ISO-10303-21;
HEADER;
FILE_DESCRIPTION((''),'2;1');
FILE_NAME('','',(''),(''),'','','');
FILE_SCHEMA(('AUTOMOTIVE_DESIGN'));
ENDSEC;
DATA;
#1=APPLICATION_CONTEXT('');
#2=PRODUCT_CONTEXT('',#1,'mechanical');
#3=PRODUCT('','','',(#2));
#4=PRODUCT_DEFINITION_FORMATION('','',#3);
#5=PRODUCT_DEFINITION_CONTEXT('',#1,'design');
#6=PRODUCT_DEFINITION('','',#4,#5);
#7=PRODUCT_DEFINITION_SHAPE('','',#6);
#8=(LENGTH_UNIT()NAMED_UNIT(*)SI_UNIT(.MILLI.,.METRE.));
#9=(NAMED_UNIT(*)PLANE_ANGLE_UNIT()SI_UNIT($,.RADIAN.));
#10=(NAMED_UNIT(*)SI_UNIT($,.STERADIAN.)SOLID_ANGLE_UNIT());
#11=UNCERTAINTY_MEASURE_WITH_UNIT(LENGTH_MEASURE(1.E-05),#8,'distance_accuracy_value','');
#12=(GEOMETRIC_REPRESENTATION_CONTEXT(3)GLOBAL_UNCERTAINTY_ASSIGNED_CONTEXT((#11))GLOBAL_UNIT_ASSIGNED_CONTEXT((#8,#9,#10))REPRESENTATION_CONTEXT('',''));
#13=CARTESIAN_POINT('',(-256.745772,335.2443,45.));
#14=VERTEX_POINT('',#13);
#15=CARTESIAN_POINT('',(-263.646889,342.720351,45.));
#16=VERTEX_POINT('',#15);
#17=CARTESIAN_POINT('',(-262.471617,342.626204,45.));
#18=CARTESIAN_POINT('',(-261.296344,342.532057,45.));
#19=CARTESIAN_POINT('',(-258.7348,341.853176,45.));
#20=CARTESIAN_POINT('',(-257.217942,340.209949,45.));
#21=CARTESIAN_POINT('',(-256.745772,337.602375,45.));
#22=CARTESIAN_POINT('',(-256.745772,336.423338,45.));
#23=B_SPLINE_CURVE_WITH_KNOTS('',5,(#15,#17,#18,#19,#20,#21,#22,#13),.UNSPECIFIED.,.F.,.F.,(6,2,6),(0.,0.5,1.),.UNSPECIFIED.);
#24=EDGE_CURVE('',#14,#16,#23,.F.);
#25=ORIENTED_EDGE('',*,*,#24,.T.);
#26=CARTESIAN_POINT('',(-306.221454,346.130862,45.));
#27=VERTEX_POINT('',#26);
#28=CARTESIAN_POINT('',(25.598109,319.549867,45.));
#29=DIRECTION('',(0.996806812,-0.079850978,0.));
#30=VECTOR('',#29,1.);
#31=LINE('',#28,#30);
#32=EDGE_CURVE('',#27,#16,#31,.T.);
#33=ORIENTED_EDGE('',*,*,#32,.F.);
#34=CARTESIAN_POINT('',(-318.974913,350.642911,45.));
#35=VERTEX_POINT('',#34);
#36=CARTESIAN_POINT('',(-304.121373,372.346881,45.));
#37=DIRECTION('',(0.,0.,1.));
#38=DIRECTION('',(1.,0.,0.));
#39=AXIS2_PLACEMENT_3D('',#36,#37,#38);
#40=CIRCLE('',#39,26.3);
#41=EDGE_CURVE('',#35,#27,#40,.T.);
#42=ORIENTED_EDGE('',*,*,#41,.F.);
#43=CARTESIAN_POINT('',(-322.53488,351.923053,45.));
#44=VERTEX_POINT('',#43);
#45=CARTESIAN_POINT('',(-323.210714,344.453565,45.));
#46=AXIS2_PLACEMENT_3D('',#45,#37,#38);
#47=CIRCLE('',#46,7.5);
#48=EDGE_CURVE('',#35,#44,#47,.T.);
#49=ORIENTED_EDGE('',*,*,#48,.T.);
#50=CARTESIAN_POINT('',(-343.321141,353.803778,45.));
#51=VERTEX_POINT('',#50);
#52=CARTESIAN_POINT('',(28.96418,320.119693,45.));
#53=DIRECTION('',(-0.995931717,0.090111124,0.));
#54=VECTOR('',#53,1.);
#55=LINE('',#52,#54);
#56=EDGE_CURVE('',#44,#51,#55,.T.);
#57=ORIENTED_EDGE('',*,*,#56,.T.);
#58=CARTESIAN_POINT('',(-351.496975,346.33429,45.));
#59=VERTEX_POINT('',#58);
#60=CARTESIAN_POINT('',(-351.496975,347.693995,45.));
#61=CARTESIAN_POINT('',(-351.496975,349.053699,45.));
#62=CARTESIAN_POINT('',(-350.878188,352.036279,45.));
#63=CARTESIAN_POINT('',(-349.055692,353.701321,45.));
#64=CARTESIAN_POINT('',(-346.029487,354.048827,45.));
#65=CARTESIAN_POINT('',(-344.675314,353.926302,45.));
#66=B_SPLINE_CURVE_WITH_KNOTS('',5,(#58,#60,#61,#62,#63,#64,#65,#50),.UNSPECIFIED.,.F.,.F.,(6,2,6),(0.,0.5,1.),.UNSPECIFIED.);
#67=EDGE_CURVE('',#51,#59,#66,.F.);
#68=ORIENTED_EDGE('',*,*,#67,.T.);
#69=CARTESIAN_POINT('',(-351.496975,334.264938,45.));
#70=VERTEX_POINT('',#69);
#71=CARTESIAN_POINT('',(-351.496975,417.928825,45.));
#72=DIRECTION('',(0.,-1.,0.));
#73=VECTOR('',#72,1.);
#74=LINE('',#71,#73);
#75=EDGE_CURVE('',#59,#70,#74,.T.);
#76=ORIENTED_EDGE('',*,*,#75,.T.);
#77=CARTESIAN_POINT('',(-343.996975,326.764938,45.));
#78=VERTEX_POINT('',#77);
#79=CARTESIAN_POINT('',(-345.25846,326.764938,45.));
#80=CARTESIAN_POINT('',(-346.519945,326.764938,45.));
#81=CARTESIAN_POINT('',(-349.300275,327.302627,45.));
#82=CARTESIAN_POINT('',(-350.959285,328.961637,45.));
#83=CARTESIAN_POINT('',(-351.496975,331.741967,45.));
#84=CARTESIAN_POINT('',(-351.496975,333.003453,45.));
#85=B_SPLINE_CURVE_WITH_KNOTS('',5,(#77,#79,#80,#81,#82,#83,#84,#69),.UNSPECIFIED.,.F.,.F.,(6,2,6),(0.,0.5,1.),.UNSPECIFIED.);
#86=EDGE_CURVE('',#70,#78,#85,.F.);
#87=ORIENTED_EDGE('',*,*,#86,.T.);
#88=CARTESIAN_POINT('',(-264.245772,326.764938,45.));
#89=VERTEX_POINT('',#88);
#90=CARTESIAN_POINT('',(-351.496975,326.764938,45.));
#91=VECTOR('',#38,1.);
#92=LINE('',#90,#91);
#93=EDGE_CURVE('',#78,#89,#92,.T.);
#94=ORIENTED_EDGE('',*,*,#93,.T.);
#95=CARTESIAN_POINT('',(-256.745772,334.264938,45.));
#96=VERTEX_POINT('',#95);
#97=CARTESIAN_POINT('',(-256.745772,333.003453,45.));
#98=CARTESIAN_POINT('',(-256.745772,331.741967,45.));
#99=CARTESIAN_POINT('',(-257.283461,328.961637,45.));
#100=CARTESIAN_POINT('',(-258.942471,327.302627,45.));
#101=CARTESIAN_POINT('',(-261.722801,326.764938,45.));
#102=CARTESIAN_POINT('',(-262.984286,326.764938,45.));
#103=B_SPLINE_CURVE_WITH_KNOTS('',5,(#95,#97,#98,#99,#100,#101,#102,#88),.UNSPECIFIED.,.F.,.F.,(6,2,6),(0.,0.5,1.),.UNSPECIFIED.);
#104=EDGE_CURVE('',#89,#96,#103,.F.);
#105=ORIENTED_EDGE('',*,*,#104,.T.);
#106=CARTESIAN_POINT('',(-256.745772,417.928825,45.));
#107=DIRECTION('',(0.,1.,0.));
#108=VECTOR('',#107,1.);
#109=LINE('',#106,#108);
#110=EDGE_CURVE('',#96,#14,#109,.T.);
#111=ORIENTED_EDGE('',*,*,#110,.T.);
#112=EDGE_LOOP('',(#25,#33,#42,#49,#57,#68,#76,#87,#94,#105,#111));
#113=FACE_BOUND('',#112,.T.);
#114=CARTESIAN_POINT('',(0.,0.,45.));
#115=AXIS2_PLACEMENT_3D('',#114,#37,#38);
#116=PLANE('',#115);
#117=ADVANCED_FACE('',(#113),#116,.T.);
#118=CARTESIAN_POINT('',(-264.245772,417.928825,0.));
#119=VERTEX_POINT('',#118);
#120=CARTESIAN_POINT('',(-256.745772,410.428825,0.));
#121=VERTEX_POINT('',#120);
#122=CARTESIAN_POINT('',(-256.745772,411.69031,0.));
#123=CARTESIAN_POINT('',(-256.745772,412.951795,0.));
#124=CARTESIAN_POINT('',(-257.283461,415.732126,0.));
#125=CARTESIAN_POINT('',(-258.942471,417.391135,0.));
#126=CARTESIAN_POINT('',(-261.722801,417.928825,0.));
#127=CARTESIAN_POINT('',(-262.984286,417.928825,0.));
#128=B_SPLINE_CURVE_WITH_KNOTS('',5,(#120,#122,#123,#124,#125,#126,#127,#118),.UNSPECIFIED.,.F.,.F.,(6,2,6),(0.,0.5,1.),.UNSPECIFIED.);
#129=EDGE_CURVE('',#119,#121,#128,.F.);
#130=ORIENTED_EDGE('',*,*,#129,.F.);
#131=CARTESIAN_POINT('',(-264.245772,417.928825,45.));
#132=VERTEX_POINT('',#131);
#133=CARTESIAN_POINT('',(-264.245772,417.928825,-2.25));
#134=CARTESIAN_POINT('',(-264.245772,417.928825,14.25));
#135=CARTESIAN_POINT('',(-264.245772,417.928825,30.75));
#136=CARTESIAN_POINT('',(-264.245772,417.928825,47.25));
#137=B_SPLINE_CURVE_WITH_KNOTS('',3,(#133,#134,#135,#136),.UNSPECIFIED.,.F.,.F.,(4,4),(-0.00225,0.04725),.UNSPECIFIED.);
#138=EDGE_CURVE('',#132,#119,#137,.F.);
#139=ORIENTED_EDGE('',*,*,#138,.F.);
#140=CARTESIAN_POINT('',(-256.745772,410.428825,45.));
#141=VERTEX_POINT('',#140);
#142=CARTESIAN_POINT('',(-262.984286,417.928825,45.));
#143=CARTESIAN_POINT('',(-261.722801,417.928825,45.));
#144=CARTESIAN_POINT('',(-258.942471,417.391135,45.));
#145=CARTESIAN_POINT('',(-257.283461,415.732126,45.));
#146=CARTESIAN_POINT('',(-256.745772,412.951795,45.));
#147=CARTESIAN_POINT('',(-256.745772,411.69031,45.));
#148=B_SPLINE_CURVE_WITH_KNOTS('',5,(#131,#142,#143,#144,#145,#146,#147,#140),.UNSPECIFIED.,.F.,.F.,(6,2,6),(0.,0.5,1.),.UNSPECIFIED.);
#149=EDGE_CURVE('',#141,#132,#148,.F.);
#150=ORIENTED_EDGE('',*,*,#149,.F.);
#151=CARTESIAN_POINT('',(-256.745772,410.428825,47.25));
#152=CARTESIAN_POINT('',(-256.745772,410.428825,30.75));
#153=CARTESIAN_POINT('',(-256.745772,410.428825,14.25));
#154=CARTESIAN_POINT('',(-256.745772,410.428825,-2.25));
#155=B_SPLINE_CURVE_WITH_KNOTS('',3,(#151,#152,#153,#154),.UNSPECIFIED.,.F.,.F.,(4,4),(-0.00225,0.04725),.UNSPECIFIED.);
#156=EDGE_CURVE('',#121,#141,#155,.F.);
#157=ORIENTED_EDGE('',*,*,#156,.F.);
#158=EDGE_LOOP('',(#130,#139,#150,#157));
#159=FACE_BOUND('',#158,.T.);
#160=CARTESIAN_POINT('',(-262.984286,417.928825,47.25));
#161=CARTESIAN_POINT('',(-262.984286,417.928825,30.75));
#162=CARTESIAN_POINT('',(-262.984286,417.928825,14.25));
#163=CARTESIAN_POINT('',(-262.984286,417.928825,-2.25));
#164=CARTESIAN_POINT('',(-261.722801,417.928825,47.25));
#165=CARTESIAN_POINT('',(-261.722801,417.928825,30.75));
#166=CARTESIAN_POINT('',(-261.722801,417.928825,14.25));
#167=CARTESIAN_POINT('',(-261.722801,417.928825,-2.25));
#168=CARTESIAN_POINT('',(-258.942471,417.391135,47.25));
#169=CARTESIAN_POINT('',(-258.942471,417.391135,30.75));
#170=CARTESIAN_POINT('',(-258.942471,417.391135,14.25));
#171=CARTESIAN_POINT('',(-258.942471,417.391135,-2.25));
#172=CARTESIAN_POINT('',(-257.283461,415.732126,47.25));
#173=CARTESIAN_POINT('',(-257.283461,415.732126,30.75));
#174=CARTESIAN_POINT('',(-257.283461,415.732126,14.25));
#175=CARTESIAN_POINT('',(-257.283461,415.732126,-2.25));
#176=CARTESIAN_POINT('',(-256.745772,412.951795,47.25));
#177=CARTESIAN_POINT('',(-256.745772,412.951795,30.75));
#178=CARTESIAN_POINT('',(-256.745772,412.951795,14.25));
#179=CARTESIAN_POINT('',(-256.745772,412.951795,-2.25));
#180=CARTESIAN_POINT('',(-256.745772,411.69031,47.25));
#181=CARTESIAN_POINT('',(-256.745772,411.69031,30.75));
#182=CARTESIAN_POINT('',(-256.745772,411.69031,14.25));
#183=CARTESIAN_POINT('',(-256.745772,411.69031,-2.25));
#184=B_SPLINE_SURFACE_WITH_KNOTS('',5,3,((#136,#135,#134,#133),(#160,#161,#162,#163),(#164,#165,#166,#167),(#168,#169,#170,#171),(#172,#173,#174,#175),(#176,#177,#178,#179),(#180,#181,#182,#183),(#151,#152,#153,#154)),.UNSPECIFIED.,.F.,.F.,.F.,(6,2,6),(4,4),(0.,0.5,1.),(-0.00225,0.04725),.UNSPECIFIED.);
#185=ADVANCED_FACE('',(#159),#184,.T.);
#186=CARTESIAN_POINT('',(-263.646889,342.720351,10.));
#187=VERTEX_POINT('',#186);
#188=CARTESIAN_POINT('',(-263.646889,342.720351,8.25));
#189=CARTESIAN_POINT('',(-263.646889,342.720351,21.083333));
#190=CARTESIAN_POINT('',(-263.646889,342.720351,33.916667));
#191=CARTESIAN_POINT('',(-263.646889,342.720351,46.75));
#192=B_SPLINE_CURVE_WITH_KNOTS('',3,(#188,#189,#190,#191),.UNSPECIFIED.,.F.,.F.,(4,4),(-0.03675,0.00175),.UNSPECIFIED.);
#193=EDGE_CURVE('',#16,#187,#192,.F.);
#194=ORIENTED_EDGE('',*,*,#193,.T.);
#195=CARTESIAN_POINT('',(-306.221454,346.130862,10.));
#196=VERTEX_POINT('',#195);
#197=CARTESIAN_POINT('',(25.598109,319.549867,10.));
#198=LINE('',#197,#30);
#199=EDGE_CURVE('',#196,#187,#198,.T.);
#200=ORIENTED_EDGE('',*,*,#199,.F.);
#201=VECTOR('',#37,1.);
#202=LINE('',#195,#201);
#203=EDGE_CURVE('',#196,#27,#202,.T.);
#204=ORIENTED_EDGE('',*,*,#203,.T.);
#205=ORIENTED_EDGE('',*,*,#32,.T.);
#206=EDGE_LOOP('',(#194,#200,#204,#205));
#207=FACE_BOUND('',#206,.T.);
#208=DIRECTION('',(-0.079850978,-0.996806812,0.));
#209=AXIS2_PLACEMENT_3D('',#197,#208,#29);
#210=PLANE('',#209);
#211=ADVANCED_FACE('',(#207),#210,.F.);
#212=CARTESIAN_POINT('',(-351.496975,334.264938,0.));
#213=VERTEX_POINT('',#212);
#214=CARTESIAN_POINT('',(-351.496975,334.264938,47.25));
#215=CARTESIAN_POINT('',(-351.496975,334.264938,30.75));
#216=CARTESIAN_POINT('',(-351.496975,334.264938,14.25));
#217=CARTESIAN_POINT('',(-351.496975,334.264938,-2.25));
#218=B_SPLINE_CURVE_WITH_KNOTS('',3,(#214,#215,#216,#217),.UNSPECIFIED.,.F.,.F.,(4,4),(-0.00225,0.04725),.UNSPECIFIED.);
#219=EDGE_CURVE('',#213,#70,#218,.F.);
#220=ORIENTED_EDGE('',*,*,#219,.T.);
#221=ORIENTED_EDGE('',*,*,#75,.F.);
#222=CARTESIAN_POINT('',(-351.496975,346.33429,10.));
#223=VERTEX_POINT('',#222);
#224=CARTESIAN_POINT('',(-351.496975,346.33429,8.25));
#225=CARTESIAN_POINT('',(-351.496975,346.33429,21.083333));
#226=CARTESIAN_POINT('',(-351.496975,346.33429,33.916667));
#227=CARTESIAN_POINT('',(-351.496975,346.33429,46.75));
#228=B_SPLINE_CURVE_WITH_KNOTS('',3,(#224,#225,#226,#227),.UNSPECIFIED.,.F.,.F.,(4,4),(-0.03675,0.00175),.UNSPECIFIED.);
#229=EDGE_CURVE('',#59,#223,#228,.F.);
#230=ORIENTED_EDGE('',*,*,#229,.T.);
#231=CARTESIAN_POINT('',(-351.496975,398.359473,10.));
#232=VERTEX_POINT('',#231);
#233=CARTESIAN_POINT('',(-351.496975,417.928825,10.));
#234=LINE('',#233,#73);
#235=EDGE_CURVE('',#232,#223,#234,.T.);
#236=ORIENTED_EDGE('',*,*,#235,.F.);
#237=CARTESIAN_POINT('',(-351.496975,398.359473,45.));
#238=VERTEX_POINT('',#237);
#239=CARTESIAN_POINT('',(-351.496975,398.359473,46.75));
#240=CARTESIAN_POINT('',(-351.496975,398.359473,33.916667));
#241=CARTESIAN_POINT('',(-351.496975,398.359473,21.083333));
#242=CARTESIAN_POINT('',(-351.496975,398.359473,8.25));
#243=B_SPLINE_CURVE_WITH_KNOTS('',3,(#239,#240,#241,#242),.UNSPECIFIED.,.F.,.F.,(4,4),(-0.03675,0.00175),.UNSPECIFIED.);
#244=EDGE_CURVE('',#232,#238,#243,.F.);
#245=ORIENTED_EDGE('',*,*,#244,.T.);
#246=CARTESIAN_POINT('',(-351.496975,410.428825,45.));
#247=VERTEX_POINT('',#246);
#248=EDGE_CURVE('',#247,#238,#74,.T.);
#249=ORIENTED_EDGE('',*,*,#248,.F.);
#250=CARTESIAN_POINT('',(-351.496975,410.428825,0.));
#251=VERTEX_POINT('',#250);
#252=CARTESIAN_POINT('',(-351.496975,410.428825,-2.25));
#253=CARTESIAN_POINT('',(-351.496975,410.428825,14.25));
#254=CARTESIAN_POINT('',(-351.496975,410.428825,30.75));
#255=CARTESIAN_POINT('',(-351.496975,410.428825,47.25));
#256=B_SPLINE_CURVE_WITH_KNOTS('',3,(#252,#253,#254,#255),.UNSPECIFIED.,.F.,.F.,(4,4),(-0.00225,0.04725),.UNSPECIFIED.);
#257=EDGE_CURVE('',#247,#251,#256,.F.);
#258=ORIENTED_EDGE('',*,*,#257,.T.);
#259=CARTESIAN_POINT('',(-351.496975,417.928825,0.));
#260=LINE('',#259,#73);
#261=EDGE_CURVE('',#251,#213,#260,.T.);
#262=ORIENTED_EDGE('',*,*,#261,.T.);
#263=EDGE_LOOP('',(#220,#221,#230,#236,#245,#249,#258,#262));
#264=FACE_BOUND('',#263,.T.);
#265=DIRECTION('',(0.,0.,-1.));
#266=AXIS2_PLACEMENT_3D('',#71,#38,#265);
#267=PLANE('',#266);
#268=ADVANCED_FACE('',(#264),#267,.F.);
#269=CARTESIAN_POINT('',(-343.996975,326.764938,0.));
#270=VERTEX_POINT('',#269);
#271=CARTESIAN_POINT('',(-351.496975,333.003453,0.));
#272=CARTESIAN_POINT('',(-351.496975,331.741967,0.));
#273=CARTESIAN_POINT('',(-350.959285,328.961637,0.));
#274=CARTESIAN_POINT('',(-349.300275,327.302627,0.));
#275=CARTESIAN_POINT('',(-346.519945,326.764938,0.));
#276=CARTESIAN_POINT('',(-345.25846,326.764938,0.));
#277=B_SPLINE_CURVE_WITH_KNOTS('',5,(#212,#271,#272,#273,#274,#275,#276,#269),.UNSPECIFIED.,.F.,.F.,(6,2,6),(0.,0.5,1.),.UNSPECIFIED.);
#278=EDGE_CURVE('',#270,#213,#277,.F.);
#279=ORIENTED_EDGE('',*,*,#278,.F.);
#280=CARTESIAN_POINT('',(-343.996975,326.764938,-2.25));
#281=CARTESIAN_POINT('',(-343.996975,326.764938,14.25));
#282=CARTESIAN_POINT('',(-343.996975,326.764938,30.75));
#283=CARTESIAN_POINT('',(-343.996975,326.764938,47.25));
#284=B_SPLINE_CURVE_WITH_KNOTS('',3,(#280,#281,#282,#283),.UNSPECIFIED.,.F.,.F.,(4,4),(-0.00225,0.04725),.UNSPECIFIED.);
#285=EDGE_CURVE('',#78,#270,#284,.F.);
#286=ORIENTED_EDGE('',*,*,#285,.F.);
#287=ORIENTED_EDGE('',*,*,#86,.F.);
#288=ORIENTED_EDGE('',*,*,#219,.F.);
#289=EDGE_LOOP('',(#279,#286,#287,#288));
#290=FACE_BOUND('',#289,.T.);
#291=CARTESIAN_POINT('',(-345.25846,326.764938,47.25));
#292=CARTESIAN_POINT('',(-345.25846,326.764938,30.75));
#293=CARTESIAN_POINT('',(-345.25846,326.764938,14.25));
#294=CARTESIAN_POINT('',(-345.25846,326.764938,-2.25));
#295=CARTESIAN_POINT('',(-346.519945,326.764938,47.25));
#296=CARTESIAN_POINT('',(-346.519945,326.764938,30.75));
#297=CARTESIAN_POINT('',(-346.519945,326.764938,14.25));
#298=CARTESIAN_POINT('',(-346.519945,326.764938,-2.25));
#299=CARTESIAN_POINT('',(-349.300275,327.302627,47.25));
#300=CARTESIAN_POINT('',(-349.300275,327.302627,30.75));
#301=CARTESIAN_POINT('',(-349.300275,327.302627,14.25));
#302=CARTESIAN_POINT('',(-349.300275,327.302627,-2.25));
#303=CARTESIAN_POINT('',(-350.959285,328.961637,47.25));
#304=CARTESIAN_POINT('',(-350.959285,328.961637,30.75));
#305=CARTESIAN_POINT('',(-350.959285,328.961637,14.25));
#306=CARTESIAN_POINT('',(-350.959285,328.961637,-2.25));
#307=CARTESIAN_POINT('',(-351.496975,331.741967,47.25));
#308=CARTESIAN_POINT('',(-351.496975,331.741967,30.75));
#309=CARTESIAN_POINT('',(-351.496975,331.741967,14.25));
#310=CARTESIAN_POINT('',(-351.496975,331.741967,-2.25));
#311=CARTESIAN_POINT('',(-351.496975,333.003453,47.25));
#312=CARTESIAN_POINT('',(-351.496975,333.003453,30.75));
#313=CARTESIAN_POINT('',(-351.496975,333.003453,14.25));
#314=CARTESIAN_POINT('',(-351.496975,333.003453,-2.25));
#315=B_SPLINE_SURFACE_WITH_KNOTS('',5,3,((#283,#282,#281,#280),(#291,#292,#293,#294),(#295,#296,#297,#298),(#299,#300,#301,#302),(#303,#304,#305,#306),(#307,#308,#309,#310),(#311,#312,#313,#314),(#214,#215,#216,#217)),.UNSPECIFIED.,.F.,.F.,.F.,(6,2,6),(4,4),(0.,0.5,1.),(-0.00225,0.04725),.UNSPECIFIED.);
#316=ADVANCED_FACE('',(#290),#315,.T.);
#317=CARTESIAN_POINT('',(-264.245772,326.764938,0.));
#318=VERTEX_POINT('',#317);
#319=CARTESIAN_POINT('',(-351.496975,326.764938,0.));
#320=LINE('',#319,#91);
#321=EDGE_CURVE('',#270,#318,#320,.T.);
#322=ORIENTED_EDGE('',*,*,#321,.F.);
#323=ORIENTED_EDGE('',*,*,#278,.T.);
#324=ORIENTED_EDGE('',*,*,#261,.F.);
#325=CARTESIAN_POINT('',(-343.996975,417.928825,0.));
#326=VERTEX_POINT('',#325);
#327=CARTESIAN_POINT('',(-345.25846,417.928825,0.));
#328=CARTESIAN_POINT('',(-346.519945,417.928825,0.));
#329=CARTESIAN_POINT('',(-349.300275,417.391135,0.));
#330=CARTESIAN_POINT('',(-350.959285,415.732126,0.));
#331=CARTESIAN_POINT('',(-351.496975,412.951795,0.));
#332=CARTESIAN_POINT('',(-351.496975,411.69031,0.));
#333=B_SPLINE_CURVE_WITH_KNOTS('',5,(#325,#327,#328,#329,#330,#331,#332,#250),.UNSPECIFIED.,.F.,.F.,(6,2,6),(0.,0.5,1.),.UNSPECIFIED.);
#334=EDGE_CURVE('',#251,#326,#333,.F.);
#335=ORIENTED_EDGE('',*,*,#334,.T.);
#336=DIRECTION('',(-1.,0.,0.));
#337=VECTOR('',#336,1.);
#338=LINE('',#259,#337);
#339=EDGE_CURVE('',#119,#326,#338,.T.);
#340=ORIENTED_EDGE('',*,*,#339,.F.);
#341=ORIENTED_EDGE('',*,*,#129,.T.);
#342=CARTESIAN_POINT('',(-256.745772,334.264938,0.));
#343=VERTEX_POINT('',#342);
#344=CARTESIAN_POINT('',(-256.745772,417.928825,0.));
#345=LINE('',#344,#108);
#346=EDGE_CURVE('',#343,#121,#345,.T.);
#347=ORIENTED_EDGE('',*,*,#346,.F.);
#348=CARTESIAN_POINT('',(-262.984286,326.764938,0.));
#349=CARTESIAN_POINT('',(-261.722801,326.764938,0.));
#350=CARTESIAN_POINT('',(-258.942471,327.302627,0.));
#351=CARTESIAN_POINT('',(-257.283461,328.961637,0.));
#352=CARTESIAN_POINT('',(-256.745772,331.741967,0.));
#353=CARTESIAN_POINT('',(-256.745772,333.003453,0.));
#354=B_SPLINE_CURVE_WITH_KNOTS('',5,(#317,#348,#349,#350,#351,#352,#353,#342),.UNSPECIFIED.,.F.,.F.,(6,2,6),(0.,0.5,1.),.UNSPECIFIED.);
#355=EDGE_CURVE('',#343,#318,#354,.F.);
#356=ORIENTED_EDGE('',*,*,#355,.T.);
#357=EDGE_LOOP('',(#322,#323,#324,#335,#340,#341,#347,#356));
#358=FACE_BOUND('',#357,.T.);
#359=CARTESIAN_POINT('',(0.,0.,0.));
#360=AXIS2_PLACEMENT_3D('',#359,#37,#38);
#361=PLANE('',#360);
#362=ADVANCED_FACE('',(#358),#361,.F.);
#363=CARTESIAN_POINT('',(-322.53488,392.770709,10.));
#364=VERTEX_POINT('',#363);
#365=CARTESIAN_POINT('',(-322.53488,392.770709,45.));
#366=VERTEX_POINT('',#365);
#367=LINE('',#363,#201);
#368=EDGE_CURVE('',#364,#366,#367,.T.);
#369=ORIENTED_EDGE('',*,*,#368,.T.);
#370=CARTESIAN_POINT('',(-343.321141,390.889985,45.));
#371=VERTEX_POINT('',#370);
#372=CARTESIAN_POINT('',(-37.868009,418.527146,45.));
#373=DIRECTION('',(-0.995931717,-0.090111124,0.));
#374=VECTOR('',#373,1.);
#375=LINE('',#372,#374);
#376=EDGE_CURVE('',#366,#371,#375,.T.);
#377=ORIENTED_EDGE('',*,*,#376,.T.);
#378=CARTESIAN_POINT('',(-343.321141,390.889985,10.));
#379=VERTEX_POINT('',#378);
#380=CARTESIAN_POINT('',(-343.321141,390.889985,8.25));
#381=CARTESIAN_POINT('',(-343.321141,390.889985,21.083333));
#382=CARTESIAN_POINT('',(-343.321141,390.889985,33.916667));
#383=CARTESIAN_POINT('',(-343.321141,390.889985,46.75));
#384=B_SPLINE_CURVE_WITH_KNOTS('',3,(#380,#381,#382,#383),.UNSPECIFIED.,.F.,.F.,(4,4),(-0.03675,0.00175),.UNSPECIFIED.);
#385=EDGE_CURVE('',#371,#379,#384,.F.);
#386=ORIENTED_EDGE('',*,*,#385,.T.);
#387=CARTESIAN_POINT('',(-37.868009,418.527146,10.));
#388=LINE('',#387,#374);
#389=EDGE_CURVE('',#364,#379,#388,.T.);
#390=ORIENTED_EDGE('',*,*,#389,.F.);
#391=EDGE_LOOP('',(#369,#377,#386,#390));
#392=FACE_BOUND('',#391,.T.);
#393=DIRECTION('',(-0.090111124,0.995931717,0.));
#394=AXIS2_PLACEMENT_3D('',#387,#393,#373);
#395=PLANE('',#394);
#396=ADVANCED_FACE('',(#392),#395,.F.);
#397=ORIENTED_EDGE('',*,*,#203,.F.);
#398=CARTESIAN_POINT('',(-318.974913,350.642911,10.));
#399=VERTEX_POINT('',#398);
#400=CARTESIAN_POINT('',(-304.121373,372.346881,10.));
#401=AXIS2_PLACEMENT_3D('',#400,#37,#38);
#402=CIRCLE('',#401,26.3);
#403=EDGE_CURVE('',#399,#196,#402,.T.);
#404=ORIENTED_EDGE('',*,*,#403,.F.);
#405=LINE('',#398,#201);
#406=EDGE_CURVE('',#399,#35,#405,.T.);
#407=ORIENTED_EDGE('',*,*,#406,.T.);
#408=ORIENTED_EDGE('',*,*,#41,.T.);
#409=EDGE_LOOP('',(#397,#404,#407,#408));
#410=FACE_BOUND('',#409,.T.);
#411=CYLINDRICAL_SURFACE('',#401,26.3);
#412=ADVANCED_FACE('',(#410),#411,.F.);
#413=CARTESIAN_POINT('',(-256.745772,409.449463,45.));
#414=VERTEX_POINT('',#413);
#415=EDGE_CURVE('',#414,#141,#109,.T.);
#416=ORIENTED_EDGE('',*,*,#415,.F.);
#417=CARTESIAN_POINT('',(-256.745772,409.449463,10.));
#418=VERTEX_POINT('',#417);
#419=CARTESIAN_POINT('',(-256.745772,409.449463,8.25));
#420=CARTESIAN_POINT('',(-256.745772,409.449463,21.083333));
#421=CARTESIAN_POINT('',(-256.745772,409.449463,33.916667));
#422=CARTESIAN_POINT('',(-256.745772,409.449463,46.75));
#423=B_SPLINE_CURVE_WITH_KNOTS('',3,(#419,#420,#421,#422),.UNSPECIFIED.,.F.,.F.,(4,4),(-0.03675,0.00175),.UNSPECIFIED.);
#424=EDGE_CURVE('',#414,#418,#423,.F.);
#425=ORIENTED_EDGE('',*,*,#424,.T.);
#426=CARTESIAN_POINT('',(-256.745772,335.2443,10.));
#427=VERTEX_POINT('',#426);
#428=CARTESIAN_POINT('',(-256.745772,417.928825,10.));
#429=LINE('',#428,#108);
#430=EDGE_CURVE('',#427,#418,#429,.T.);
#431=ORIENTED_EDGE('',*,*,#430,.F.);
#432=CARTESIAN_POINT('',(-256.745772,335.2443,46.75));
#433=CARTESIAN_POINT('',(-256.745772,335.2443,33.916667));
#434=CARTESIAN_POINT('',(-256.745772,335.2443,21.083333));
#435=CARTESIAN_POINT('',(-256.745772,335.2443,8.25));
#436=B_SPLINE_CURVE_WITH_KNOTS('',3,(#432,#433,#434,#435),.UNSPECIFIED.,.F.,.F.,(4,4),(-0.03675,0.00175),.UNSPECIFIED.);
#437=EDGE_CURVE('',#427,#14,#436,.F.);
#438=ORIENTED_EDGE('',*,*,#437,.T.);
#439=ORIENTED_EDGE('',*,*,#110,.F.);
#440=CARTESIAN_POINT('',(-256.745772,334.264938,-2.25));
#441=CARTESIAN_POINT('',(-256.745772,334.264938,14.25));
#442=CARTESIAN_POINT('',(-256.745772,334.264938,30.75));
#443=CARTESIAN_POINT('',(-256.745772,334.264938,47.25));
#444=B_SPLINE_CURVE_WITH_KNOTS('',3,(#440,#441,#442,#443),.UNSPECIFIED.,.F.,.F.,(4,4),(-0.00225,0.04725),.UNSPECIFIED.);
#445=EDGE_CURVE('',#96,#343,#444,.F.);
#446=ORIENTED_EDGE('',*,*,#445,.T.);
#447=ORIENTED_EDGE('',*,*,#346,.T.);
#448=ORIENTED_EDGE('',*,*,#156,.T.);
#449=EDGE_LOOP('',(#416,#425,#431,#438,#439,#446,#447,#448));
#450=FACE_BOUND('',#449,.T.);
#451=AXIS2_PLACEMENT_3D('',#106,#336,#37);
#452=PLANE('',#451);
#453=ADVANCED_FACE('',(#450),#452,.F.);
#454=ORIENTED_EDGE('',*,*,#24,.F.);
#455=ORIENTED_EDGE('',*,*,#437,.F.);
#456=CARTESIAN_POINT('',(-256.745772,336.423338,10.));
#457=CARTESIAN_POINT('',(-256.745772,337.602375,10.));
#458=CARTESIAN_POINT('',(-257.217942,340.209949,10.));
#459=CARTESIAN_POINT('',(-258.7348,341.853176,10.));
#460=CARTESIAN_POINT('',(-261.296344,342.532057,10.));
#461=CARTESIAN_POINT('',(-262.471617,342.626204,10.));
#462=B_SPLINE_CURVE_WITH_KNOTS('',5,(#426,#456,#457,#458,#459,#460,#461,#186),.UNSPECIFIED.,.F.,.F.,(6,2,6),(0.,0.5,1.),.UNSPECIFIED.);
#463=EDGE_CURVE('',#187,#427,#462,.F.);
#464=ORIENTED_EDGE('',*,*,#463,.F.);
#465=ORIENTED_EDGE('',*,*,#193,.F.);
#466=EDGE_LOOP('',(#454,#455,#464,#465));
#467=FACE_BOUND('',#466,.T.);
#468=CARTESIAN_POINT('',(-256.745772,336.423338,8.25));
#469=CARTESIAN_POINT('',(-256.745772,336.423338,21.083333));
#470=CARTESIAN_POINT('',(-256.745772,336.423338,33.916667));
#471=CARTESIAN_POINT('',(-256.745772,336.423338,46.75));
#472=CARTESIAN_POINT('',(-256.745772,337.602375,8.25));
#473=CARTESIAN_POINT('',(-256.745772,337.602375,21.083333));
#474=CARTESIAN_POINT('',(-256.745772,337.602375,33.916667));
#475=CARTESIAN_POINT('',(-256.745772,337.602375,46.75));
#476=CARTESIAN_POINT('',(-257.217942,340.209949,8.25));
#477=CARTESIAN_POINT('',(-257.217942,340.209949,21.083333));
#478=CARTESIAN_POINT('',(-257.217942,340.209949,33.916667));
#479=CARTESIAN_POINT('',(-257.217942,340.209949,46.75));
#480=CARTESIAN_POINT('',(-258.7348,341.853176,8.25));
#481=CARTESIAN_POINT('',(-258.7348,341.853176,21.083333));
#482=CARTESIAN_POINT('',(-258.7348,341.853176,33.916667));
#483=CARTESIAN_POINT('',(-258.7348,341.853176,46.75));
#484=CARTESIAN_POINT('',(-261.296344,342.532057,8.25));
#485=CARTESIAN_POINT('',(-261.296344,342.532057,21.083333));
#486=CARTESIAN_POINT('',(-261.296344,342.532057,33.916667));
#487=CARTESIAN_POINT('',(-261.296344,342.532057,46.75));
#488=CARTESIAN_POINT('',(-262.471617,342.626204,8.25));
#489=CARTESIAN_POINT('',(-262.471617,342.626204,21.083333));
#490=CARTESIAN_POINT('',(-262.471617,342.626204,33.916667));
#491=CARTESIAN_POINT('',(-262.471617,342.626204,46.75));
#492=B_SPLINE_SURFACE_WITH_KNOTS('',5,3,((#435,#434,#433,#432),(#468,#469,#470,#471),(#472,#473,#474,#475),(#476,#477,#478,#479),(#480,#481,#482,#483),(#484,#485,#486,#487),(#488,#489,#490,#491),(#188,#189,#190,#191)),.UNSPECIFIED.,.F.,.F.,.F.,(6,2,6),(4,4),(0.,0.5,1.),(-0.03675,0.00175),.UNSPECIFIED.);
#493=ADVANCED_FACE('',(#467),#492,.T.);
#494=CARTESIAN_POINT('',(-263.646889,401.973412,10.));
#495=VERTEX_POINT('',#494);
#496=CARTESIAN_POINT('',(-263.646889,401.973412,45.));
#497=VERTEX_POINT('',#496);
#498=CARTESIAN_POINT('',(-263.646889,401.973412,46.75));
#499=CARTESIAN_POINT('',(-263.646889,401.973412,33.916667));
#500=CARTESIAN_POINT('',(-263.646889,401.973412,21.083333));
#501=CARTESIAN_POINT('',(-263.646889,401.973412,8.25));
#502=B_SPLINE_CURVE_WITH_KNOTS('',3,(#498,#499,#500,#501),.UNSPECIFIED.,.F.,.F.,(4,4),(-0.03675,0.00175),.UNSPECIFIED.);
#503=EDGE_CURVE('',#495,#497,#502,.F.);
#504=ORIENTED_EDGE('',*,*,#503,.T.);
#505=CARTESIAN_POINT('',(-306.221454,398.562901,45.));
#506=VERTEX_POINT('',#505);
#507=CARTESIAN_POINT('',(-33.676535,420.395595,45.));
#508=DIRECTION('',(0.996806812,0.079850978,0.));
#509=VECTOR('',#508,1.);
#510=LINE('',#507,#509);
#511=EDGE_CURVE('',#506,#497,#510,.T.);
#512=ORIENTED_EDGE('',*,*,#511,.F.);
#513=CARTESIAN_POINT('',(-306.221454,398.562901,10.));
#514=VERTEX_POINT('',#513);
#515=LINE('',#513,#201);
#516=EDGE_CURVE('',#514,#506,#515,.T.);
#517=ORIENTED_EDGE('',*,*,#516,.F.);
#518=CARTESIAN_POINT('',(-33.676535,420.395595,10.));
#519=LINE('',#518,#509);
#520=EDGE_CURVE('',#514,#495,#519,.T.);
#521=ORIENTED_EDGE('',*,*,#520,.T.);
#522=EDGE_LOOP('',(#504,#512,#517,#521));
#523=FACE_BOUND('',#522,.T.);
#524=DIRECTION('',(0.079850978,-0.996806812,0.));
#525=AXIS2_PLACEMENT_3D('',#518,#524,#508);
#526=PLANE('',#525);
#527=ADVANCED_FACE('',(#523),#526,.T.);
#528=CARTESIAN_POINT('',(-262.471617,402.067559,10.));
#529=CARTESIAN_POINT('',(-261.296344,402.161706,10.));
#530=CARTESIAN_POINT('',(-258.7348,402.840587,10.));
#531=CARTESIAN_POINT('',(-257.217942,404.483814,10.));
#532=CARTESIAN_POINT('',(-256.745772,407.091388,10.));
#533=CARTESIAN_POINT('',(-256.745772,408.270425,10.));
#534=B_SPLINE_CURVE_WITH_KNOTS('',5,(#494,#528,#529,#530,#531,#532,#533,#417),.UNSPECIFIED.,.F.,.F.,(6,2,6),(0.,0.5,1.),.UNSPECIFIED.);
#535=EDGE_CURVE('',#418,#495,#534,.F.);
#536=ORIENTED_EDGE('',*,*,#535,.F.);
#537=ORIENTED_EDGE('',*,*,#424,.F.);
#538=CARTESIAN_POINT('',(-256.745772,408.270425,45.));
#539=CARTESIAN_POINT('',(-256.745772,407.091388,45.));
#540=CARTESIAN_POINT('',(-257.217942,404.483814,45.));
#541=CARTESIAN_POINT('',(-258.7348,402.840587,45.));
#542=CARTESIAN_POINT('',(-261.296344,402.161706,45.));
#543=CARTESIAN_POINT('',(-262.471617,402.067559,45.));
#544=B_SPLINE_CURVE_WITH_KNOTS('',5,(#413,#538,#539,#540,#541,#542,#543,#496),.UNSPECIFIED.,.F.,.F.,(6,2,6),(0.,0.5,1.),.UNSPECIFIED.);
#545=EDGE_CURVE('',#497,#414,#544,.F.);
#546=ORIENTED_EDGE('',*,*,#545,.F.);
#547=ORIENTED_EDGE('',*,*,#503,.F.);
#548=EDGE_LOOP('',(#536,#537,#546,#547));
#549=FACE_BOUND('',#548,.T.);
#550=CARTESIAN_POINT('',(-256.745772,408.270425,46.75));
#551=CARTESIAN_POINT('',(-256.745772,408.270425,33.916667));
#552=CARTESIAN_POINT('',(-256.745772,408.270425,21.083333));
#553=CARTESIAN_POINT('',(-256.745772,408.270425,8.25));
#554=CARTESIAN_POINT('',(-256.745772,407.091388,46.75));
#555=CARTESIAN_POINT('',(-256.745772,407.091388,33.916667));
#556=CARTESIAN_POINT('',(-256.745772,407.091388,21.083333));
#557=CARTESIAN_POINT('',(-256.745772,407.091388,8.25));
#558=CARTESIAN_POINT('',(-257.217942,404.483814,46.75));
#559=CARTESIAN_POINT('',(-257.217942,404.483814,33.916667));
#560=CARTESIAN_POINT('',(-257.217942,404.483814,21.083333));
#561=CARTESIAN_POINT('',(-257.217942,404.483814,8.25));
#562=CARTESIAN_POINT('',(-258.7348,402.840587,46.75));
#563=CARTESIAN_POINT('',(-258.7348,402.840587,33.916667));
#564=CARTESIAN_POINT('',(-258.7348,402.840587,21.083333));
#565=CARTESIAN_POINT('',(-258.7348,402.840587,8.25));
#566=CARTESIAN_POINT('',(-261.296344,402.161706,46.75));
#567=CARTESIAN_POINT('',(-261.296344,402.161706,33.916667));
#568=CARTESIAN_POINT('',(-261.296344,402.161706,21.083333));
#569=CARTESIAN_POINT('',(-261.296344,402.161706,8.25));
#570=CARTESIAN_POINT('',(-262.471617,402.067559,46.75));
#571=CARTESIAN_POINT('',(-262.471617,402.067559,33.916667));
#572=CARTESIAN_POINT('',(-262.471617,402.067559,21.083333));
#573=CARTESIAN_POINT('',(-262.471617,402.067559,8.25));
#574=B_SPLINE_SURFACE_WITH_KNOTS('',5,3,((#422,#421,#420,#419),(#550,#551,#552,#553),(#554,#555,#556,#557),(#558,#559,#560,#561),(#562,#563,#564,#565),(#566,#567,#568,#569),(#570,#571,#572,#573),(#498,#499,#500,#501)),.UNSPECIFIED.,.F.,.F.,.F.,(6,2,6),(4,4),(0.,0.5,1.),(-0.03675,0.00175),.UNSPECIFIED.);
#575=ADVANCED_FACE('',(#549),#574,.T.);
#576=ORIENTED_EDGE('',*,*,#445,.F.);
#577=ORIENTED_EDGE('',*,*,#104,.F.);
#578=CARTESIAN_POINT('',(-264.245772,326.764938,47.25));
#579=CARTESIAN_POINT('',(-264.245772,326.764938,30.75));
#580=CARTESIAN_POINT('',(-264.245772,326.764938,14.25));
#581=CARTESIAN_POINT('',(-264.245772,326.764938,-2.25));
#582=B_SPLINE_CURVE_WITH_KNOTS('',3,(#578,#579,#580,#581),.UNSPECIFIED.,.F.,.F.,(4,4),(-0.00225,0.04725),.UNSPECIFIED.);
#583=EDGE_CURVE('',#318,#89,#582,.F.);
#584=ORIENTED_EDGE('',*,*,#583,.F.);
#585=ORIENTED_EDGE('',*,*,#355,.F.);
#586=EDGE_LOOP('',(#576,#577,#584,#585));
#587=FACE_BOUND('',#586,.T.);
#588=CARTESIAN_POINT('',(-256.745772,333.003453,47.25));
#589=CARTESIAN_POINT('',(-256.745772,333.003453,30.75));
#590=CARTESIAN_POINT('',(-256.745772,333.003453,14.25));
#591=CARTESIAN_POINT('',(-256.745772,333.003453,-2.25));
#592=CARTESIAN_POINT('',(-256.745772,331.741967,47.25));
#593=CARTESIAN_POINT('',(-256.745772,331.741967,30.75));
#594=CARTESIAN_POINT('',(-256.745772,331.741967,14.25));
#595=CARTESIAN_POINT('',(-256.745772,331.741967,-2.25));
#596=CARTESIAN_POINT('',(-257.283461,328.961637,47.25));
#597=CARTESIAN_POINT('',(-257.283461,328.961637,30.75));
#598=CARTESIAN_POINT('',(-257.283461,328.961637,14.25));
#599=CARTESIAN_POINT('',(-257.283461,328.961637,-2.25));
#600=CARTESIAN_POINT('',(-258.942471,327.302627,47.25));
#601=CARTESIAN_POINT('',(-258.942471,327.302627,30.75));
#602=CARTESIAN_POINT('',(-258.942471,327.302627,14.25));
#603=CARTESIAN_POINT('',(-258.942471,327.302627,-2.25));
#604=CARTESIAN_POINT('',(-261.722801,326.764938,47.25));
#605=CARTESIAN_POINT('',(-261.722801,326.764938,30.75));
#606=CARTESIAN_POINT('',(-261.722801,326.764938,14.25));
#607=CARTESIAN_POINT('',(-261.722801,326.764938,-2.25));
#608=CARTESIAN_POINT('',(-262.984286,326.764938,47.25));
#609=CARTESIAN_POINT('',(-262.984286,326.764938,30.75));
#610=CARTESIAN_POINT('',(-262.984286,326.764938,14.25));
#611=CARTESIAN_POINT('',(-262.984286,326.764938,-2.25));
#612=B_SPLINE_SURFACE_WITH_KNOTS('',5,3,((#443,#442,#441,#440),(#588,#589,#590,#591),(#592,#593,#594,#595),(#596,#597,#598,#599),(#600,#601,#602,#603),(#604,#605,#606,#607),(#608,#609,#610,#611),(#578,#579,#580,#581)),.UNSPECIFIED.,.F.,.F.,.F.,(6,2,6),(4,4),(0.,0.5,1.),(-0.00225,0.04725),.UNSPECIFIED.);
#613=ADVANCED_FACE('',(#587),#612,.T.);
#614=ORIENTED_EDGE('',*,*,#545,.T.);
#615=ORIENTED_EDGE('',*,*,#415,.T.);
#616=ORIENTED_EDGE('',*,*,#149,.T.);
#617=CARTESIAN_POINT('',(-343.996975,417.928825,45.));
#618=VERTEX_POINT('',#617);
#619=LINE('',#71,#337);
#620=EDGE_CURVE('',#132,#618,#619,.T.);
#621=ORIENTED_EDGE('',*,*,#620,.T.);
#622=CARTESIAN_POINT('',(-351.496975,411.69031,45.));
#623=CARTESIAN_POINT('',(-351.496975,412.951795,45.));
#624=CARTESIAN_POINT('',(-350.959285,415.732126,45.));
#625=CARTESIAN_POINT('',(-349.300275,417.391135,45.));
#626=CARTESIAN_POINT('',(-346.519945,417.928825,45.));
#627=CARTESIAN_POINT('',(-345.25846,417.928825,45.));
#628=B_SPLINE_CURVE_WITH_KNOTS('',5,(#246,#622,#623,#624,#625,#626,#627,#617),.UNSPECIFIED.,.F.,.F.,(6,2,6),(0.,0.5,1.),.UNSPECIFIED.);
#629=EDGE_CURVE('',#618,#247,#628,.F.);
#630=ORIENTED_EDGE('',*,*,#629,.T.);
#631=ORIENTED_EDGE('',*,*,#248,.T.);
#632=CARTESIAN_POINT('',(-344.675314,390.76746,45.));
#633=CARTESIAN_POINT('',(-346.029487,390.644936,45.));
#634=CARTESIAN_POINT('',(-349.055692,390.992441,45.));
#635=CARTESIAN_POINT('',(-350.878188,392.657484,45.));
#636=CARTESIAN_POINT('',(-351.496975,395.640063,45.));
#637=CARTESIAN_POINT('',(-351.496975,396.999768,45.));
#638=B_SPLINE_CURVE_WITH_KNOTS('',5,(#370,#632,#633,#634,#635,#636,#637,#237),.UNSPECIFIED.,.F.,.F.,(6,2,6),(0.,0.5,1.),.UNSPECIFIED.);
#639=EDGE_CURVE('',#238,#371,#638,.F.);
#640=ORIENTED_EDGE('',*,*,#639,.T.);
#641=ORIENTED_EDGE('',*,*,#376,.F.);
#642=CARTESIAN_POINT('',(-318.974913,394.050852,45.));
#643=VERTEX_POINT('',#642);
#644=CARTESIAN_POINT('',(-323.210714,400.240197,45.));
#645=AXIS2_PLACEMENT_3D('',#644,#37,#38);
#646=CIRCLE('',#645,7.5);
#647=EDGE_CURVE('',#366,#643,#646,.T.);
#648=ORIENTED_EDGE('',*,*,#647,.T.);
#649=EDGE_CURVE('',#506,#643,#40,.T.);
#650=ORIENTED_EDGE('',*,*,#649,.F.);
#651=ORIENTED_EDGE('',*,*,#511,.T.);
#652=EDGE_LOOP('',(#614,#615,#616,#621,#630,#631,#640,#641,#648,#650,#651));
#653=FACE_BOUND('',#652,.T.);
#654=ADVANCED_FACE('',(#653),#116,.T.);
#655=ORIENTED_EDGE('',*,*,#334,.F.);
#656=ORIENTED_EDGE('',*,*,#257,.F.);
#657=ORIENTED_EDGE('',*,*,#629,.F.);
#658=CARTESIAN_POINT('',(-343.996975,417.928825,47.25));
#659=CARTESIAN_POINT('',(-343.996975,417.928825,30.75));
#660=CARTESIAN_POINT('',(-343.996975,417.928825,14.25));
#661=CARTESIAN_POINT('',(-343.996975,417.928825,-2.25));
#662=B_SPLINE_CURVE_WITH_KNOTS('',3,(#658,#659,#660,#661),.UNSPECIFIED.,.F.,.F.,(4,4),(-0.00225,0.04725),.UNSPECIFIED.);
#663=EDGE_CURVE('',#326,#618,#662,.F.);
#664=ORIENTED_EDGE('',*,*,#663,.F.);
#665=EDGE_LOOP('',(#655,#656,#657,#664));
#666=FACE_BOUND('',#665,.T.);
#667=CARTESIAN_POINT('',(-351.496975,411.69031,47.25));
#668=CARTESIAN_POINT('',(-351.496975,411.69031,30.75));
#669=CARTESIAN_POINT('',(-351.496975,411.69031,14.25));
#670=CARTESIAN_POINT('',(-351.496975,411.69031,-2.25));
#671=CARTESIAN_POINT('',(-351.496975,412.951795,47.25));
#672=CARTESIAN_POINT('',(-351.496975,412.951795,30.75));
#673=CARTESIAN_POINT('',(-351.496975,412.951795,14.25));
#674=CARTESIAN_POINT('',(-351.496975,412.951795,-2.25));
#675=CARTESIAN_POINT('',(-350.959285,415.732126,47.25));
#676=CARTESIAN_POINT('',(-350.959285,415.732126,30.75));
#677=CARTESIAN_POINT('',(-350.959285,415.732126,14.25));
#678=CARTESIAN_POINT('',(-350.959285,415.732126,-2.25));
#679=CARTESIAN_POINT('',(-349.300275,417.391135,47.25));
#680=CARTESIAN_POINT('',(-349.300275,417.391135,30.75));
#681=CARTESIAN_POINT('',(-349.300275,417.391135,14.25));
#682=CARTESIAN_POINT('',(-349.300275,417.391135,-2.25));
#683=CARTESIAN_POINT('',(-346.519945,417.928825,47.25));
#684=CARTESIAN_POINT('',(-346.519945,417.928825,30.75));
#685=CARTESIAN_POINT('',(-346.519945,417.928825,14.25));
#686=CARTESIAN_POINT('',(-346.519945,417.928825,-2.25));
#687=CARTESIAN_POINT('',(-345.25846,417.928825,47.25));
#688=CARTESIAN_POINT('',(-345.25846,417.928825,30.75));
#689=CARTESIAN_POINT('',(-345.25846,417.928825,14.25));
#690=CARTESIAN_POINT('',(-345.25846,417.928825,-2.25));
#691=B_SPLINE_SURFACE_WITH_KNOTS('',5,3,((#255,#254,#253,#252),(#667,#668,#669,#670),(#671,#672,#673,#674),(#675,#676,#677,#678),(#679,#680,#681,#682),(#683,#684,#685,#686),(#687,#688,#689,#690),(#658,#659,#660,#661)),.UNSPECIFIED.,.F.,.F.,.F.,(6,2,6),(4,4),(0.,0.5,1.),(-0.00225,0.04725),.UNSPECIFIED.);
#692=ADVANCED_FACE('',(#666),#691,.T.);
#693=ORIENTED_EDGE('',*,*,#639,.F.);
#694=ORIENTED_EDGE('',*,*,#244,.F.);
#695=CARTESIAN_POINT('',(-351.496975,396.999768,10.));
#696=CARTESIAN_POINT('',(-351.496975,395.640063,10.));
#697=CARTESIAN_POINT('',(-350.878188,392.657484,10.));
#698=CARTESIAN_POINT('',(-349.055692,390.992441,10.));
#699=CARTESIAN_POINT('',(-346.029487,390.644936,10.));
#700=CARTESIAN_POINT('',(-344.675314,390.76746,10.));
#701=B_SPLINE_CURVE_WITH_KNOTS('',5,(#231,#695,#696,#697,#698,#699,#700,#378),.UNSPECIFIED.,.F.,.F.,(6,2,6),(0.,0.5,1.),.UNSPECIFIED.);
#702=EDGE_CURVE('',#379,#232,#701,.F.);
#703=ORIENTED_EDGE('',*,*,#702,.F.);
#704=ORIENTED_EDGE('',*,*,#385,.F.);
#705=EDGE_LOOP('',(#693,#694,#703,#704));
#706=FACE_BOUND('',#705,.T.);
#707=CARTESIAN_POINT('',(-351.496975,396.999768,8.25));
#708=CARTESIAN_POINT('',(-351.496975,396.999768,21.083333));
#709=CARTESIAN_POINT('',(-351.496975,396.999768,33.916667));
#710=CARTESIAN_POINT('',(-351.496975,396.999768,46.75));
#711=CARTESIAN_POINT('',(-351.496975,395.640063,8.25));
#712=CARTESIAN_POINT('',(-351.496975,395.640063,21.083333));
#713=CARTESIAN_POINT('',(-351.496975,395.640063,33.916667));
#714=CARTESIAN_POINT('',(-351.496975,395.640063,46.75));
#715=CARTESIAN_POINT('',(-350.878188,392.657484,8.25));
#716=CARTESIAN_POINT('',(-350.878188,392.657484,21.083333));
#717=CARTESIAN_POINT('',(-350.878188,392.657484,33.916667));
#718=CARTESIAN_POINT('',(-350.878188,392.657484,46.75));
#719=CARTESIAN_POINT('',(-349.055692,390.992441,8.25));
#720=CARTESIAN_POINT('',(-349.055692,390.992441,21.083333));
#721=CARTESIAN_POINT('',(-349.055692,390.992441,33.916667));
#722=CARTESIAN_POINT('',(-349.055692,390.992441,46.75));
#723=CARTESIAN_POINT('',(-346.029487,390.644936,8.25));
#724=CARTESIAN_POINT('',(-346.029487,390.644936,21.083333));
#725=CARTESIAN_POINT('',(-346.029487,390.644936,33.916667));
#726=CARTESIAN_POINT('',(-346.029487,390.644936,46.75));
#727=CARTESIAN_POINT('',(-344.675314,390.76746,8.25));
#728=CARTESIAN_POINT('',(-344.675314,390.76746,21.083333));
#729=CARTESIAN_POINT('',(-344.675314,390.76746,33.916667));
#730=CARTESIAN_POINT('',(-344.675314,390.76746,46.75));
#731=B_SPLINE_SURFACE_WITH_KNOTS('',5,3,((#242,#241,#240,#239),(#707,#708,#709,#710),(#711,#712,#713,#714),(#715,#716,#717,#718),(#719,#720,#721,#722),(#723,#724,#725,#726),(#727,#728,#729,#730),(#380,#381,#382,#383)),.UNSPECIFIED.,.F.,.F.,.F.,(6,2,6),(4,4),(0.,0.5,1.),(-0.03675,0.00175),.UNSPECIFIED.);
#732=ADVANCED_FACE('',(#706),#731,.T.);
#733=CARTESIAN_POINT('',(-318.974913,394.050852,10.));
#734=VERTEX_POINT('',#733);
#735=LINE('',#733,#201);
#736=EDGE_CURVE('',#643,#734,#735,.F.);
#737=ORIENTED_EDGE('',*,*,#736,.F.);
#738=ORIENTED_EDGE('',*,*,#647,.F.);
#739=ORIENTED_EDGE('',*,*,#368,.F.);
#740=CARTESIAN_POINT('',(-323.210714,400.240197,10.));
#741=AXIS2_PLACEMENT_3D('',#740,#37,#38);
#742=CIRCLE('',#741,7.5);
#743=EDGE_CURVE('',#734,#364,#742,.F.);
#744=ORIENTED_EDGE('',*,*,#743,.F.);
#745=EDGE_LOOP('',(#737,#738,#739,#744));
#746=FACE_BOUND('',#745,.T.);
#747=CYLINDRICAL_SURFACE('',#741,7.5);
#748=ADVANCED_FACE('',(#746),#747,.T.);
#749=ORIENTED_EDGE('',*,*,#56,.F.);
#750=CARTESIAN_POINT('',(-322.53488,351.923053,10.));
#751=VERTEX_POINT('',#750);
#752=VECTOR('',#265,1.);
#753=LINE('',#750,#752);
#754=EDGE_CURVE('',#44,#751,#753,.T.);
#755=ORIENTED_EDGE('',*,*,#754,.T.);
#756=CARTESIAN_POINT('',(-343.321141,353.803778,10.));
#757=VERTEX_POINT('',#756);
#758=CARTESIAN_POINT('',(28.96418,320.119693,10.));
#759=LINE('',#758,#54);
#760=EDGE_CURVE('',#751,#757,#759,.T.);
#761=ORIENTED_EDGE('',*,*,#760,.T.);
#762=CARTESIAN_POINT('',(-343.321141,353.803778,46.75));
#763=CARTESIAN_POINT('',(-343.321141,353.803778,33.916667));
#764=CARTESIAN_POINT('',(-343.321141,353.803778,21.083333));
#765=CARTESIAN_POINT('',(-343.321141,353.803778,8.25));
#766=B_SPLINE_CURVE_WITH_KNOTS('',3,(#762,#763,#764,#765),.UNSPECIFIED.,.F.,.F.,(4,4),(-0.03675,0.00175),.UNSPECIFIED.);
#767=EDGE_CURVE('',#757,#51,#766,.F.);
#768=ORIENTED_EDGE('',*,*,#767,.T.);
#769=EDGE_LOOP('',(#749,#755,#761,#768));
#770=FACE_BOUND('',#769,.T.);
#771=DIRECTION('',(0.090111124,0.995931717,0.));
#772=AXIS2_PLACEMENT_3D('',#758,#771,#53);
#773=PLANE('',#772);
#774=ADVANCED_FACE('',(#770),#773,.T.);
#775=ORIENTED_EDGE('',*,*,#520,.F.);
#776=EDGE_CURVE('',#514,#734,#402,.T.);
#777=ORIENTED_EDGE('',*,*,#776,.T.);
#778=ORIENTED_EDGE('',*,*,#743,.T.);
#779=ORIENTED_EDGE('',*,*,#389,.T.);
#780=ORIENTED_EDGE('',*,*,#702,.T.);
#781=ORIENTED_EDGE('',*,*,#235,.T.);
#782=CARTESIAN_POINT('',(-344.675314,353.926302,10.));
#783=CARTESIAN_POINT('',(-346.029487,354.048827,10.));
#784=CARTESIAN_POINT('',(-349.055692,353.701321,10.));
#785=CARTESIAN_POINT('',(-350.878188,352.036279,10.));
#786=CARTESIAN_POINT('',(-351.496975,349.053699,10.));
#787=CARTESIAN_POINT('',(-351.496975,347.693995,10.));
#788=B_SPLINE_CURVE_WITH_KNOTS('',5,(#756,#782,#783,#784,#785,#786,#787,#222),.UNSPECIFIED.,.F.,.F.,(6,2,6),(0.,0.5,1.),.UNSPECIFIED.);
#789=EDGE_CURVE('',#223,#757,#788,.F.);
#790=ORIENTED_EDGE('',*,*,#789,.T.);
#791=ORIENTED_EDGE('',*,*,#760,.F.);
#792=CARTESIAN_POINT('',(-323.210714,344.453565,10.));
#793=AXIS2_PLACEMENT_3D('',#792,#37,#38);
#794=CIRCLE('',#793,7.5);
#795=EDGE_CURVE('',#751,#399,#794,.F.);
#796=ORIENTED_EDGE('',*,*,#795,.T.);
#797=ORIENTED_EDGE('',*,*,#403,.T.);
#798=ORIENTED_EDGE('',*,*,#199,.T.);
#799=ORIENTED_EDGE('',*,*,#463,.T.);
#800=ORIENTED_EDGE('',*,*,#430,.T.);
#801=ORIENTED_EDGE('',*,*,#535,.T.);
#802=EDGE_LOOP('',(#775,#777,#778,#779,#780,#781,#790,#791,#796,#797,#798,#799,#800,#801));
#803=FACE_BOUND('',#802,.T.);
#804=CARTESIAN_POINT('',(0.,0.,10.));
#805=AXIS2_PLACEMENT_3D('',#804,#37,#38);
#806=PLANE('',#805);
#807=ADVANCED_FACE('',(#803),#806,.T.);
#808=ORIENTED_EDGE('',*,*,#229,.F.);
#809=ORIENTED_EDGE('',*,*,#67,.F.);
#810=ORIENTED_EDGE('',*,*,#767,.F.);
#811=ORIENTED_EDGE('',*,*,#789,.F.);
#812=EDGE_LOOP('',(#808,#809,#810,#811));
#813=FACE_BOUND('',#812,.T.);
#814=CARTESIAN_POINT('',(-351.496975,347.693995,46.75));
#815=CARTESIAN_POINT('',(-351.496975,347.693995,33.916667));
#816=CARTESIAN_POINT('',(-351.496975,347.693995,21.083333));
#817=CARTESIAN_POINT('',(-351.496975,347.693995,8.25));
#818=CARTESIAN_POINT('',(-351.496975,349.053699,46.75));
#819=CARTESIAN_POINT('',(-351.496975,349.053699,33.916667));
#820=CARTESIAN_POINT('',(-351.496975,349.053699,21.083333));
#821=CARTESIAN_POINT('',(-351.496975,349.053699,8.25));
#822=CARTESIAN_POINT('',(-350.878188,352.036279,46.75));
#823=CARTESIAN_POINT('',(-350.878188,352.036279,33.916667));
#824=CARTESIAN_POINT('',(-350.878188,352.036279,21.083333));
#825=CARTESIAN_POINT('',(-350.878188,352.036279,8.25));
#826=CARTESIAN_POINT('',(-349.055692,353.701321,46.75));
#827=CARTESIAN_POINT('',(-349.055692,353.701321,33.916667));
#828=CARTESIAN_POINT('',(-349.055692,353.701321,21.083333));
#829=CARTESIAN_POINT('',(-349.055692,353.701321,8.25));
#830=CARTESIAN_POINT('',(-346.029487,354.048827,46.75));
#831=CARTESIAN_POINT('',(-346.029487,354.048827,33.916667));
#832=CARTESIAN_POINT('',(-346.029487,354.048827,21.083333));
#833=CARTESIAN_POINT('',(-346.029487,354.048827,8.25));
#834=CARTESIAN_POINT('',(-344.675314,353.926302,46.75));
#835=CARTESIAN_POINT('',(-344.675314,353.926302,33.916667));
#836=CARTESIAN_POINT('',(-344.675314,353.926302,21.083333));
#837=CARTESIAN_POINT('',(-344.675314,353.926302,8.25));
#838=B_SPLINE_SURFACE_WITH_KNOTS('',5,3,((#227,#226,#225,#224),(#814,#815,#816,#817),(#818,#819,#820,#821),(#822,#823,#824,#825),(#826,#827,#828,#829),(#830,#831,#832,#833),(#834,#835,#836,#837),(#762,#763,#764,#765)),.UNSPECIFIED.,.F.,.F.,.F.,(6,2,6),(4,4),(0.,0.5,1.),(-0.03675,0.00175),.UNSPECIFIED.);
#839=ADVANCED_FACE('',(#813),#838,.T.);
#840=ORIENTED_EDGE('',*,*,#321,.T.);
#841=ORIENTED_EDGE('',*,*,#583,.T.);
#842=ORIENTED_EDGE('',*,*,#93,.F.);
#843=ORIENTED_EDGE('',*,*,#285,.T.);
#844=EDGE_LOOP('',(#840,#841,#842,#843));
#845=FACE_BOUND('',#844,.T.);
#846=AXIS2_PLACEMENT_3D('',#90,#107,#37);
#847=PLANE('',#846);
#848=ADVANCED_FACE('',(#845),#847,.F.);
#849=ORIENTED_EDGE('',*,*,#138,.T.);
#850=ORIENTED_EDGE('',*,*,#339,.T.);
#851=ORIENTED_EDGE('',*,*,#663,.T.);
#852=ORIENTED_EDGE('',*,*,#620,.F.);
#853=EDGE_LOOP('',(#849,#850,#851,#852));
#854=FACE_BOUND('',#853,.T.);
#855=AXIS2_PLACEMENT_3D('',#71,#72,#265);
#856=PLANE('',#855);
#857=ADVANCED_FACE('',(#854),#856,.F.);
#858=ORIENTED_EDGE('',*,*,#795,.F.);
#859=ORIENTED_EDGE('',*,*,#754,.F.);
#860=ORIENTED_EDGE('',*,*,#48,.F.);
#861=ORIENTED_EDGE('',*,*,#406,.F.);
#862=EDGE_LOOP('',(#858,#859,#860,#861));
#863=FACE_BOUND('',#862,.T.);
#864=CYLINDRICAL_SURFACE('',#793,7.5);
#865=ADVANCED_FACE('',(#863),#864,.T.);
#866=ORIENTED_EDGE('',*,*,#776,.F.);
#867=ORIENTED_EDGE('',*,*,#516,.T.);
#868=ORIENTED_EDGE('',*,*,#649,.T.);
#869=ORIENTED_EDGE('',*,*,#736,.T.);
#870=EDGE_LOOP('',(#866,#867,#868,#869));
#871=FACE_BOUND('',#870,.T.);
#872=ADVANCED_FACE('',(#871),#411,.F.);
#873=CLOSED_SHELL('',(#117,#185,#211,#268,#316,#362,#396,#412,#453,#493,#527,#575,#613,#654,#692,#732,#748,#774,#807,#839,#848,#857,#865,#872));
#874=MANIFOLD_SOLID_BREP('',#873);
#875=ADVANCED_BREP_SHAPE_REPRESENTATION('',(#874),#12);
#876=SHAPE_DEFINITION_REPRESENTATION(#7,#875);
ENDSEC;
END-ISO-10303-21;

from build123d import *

# Parameters (mm, degrees)
SKETCH2_W           = 94.751202958
SKETCH2_H           = 91.163886598
BOSS_EXTRUDE1_DEPTH = 45
CUT_EXTRUDE3_DEPTH  = 35
FILLET2_SIZE        = 7.5
FILLET3_R           = 7.5


with BuildPart() as part:
    # Sketch2 → Boss-Extrude1 (new body)
    with BuildSketch(Plane.XY):
        with Locations((-304.121373084, 372.346881372)):
            Rectangle(SKETCH2_W, SKETCH2_H)
    extrude(amount=BOSS_EXTRUDE1_DEPTH)

    # Sketch5 → Cut-Extrude3 (cut)
    with BuildSketch(Plane.XY.offset(45)):
        with BuildLine():
            Line((-371.329773575, 356.337977129), (-320.45664172, 351.735015891))
            ThreePointArc((-320.45664172, 351.735015891), (-313.755539426, 347.87500284), (-306.221453805, 346.130862205))
            Line((-306.221453805, 346.130862205), (-238.931197352, 340.740456843))
            Line((-238.931197352, 340.740456843), (-238.931197352, 403.953305901))
            Line((-238.931197352, 403.953305901), (-306.221453805, 398.562900539))
            ThreePointArc((-306.221453805, 398.562900539), (-313.755539426, 396.818759904), (-320.45664172, 392.958746853))
            Line((-320.45664172, 392.958746853), (-371.329773575, 388.355785615))
            Line((-371.329773575, 388.355785615), (-371.329773575, 356.337977129))
        make_face()
    extrude(amount=-CUT_EXTRUDE3_DEPTH, mode=Mode.SUBTRACT)

    # Fillet2
    # a fillet whose section is not a circle: 7.5 mm, written as the material it takes off along each edge
    with BuildSketch(Plane(origin=(-351.496974563, 326.764938073, -18.75), x_dir=(0, 1, 0), z_dir=(0, 0, 1)), Plane(origin=(-351.496974563, 417.928824671, -18.75), x_dir=(1, 0, 0), z_dir=(0, 0, 1))) as fillet2_piece_1:
        with BuildLine():
            add(Edge.make_bspline([(FILLET2_SIZE, 0), (6.238514613, 0), (4.977029227, 0), (2.196699141, -0.537689399), (0.537689399, -2.196699141), (0, -4.977029227), (0, -6.238514613), (0, -FILLET2_SIZE)], knots=[0, 0, 0, 0, 0, 0, 0.5, 0.5, 1, 1, 1, 1, 1, 1], degree=5))
            Line((0, -FILLET2_SIZE), (0, 0))
            Line((0, 0), (FILLET2_SIZE, 0))
        make_face()
    extrude(amount=82.5, mode=Mode.SUBTRACT)
    with BuildSketch(Plane(origin=(-351.496974563, 354.543520964, 10), x_dir=(0, -1, 0), z_dir=(0, 0, 1)), Plane(origin=(-351.496974563, 390.15024178, 65.523077256), x_dir=(0, 1, 0), z_dir=(0, 0, -1))) as fillet2_piece_2:
        with BuildLine():
            add(Edge.make_bspline([(8.209230902, 0), (6.849526251, 0), (5.4898216, 0), (2.507242029, 0.618786495), (0.842199494, 2.441282313), (0.494693995, 5.467487453), (0.617218509, 6.821660441), (0.739743023, 8.17583343)], knots=[0, 0, 0, 0, 0, 0, 0.5, 0.5, 1, 1, 1, 1, 1, 1], degree=5))
            Line((0.739743023, 8.17583343), (0, 0))
            Line((0, 0), (8.209230902, 0))
        make_face()
    extrude(amount=55.523077256, mode=Mode.SUBTRACT)
    with BuildSketch(Plane(origin=(-256.745771605, 417.928824671, -18.75), x_dir=(-1, 0, 0), z_dir=(0, 0, 1)), Plane(origin=(-256.745771605, 326.764938073, -18.75), x_dir=(0, 1, 0), z_dir=(0, 0, 1))) as fillet2_piece_3:
        with BuildLine():
            add(Edge.make_bspline([(FILLET2_SIZE, 0), (6.238514613, 0), (4.977029227, 0), (2.196699141, 0.537689399), (0.537689399, 2.196699141), (0, 4.977029227), (0, 6.238514613), (0, FILLET2_SIZE)], knots=[0, 0, 0, 0, 0, 0, 0.5, 0.5, 1, 1, 1, 1, 1, 1], degree=5))
            Line((0, FILLET2_SIZE), (0, 0))
            Line((0, 0), (FILLET2_SIZE, 0))
        make_face()
    extrude(amount=82.5, mode=Mode.SUBTRACT)
    with BuildSketch(Plane(origin=(-256.745771605, 342.167524916, 62.308062051), x_dir=(0, -1, 0), z_dir=(0, 0, -1)), Plane(origin=(-256.745771605, 402.526237828, 10), x_dir=(0, 1, 0), z_dir=(0, 0, 1))) as fillet2_piece_4:
        with BuildLine():
            add(Edge.make_bspline([(6.923224821, 0), (5.744187381, 0), (4.565149942, 0), (1.957575936, 0.472170808), (0.314348726, 1.989028329), (-0.364531688, 4.550572562), (-0.45867898, 5.725845114), (-0.552826273, 6.901117665)], knots=[0, 0, 0, 0, 0, 0, 0.5, 0.5, 1, 1, 1, 1, 1, 1], degree=5))
            Line((-0.552826273, 6.901117665), (0, 0))
            Line((0, 0), (6.923224821, 0))
        make_face()
    extrude(amount=52.308062051, mode=Mode.SUBTRACT)

    # Fillet3
    fillet3_edges = [part.edges().sort_by_distance(p)[0] for p in [
        (-320.45664172, 351.735015891, 27.5),
        (-320.45664172, 392.958746853, 27.5),
    ]]
    fillet(fillet3_edges, radius=FILLET3_R)


solid = part.part
